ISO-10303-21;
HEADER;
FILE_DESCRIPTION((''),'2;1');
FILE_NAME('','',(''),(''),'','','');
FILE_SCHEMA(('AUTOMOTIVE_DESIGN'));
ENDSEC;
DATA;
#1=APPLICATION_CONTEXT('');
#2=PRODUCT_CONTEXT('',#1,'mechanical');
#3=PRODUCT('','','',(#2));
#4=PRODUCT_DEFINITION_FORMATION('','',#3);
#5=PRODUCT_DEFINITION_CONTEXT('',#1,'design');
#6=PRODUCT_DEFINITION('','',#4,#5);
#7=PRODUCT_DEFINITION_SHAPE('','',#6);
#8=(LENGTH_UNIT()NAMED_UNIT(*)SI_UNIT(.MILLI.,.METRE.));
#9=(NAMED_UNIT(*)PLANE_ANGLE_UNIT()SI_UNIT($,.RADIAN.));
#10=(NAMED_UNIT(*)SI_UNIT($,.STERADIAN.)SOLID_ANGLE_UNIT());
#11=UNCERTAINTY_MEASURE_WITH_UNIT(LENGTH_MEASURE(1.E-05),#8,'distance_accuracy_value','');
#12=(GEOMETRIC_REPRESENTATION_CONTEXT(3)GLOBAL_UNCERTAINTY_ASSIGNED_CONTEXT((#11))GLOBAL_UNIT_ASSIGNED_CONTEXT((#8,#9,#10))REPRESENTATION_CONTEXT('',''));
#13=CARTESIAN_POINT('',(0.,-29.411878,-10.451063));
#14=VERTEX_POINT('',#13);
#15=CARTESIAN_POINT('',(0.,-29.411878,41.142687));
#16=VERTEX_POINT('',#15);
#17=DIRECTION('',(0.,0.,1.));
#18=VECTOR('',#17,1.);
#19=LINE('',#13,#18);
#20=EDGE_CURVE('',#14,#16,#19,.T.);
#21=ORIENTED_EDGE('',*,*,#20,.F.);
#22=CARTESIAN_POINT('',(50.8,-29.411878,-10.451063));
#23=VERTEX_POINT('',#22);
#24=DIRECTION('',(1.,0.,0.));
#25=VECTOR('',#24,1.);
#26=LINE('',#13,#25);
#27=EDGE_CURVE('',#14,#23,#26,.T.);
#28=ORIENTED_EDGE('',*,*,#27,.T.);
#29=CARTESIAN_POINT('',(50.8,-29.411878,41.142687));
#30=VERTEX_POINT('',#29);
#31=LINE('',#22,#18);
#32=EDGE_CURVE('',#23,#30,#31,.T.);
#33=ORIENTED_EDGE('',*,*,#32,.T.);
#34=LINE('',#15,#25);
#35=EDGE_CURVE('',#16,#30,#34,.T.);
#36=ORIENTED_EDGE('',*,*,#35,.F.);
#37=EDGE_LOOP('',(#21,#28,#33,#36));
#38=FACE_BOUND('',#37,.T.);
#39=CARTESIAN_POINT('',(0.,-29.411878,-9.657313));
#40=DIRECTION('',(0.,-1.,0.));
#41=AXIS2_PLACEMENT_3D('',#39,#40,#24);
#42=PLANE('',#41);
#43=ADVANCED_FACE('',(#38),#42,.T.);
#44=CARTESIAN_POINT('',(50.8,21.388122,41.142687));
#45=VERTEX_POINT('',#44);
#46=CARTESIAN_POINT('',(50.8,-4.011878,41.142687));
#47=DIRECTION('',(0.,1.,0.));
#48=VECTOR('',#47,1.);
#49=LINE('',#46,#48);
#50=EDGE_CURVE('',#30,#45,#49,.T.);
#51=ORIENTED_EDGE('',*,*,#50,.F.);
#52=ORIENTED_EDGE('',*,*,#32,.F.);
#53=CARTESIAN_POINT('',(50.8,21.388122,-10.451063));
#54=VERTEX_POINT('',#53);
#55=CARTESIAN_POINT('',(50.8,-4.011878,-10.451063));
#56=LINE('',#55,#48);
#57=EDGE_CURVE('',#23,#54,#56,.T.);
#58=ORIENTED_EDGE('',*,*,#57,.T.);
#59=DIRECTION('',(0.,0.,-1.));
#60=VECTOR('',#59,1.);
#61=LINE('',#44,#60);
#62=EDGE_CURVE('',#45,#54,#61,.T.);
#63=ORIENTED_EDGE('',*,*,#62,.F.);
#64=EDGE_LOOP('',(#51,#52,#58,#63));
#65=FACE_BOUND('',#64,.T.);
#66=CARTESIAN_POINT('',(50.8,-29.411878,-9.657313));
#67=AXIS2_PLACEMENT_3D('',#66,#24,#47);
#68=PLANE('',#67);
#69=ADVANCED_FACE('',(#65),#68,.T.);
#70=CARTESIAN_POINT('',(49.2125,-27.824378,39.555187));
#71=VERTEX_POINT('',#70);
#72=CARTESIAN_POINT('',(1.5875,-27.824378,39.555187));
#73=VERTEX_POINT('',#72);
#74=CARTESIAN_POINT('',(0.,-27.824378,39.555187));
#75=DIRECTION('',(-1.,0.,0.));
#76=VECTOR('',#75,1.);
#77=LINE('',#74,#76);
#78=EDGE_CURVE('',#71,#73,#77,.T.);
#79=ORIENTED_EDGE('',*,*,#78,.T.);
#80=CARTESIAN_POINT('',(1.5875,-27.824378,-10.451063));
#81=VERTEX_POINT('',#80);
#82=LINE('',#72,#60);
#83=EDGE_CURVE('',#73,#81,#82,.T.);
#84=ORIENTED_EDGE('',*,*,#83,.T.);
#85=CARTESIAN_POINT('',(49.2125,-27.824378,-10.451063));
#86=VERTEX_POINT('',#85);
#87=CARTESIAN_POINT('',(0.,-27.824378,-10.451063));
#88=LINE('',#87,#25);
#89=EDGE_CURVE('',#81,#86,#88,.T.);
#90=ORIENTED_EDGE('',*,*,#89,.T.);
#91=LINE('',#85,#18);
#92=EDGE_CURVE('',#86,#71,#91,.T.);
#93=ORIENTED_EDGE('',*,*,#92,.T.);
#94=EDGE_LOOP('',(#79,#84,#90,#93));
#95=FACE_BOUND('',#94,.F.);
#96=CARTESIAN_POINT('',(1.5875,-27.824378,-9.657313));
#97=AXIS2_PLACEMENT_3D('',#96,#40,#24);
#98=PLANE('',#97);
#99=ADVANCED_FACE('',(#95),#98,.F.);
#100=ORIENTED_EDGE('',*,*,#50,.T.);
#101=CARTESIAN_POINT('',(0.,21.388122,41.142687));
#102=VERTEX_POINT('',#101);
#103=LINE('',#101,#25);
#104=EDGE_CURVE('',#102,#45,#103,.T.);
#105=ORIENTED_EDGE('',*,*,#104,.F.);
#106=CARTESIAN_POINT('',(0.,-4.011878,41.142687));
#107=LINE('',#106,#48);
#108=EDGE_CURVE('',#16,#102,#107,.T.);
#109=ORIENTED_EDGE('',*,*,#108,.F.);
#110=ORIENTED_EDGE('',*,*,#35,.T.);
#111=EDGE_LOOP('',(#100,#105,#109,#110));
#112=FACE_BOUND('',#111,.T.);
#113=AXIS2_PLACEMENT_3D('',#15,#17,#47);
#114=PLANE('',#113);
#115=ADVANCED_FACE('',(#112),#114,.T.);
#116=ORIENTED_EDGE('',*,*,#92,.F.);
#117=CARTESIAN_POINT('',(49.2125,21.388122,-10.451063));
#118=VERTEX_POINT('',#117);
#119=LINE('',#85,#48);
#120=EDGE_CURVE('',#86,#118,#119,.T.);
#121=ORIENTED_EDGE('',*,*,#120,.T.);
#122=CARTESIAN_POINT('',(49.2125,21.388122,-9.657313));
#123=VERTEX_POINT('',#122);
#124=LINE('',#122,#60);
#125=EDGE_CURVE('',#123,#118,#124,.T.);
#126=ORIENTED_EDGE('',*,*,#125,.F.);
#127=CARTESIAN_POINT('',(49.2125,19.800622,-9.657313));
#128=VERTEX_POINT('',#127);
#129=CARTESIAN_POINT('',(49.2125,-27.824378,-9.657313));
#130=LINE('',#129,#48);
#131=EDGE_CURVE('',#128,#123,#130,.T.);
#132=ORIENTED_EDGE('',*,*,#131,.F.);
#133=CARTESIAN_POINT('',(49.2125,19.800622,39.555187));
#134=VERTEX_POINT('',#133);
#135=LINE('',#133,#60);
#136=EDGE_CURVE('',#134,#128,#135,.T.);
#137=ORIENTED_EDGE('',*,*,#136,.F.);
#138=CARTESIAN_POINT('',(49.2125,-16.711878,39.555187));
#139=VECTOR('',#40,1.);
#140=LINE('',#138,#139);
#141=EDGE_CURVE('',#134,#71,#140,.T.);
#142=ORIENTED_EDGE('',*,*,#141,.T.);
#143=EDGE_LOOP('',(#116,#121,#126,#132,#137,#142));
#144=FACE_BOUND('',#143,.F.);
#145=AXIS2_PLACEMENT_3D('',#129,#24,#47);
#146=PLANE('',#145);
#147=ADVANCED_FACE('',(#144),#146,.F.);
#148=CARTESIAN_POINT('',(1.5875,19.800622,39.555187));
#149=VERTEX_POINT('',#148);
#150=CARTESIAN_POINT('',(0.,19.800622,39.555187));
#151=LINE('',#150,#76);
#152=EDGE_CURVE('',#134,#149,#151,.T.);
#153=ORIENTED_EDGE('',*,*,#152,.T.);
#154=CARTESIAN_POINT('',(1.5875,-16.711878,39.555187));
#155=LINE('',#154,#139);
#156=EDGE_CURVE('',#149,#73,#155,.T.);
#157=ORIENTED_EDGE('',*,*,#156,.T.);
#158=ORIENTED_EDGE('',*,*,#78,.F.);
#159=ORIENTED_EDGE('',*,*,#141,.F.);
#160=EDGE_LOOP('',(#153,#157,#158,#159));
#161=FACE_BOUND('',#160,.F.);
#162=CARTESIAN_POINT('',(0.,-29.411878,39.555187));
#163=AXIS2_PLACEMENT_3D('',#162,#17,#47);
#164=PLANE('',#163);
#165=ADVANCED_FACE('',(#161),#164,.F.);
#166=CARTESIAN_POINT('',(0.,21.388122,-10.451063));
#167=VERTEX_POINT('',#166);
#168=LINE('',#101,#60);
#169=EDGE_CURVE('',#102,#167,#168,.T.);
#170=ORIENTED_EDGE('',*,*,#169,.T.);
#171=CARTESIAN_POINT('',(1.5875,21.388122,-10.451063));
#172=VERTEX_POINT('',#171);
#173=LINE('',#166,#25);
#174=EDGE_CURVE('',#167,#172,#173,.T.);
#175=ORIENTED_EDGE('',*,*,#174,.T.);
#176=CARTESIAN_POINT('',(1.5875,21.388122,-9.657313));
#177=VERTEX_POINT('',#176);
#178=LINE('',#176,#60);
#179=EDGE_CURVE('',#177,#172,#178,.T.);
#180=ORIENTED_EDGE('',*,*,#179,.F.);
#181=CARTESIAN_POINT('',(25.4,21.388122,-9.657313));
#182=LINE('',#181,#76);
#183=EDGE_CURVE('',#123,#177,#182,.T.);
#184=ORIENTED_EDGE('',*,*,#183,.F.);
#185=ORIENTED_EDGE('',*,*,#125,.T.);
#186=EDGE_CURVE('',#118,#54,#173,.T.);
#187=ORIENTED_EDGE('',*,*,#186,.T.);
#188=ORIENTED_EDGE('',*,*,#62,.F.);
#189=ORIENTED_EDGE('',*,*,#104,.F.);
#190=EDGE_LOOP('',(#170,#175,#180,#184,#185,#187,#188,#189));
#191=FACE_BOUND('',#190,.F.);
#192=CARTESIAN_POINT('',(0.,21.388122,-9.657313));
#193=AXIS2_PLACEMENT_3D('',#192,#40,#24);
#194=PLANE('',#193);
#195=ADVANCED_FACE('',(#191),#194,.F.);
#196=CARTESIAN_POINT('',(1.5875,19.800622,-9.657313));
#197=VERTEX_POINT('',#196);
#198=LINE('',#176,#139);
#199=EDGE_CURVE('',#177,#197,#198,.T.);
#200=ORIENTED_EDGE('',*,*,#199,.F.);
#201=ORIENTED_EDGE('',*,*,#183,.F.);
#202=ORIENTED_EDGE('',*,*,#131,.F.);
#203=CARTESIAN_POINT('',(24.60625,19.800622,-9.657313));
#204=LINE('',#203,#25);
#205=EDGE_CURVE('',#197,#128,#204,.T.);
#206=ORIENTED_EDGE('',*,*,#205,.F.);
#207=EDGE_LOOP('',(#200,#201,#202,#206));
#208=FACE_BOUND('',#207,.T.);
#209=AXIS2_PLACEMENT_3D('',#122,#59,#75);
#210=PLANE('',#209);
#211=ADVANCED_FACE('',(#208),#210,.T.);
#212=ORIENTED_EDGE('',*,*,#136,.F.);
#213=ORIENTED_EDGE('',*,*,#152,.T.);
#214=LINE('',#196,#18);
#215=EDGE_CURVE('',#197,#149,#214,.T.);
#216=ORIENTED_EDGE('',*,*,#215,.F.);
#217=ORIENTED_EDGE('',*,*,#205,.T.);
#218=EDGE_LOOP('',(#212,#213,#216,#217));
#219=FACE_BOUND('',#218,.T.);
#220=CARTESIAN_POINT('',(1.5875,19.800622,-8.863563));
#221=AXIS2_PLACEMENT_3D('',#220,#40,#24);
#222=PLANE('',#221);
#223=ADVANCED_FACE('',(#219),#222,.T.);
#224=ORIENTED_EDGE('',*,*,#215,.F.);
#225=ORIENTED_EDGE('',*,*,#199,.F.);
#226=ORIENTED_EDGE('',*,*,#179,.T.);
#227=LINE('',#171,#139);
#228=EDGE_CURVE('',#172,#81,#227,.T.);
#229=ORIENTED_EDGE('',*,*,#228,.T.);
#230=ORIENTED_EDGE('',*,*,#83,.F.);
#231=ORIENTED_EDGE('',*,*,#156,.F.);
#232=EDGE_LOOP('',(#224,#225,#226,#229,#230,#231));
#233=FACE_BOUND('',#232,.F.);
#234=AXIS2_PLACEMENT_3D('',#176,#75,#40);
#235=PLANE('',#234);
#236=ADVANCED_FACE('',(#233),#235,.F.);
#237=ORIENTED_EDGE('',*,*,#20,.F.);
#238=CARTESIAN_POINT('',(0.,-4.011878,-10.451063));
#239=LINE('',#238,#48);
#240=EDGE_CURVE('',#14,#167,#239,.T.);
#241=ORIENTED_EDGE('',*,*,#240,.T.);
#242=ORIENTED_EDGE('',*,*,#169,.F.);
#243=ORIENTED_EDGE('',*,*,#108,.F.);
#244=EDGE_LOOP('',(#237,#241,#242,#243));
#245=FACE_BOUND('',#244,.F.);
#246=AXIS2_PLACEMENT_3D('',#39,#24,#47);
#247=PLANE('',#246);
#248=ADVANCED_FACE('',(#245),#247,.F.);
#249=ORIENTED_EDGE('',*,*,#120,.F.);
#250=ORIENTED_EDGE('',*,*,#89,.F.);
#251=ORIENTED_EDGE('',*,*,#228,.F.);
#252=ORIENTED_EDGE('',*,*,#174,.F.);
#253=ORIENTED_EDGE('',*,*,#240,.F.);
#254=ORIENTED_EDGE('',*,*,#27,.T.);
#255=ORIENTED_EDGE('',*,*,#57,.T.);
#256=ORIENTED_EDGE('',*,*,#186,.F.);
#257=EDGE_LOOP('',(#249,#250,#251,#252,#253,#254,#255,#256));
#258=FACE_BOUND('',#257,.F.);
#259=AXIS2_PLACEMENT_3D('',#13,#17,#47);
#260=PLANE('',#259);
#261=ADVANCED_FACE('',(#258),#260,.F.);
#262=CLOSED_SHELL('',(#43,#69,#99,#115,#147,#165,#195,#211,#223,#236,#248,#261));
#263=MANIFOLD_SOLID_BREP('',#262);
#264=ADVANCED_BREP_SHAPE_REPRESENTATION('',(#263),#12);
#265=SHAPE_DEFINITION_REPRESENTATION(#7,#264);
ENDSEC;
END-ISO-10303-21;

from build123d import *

# Parameters (mm, degrees)
F0_W     = 50.8
F0_H     = 50.8
F1_DEPTH = 50.8
F2_T     = -1.5875
F3_W     = 47.625
F3_H     = 0.79375
F4_DEPTH = 5.08
F7_DEPTH = 0.79375


# Not quite as in the source:
# - a length typed as a fraction of an inch, garbled in the dataset ("3 / 203.2 mm" for 3/8 in), is restored


with BuildPart() as f1:
    # F0 (on Right) → F1 (new body)
    with BuildSketch(Plane.YZ):
        with Locations((-4.0118778124, 15.742687114)):
            Rectangle(F0_W, F0_H)
    extrude(amount=F1_DEPTH)

    # F2
    f2_openings = [f1.faces().sort_by_distance(p)[0] for p in [
        (25.4, -4.011878, -9.657313),
    ]]
    offset(amount=F2_T, openings=f2_openings)

    # F3 (on face) → F4 (cut)
    with BuildSketch(Plane(origin=(0, 21.3881221876, 0), x_dir=(-1, 0, 0), z_dir=(0, 1, 0))):
        with Locations((-25.4, -9.260437886)):
            Rectangle(F3_W, F3_H)
    extrude(amount=-F4_DEPTH, mode=Mode.SUBTRACT)


with BuildPart() as f5_1:
    # F5: copy of F1
    add(f1.part)


with BuildPart() as f1_1:
    add(f1.part)

    # F7 (add): faces of the model
    f7_faces = [f1_1.faces().sort_by_distance(p)[0] for p in [
        (0.7184204897, -4.0118778124, -9.657312886),
        (25.4, 20.5943721876, -8.863562886),
    ]]
    extrude(f7_faces, amount=F7_DEPTH)


solid = f1_1.part
